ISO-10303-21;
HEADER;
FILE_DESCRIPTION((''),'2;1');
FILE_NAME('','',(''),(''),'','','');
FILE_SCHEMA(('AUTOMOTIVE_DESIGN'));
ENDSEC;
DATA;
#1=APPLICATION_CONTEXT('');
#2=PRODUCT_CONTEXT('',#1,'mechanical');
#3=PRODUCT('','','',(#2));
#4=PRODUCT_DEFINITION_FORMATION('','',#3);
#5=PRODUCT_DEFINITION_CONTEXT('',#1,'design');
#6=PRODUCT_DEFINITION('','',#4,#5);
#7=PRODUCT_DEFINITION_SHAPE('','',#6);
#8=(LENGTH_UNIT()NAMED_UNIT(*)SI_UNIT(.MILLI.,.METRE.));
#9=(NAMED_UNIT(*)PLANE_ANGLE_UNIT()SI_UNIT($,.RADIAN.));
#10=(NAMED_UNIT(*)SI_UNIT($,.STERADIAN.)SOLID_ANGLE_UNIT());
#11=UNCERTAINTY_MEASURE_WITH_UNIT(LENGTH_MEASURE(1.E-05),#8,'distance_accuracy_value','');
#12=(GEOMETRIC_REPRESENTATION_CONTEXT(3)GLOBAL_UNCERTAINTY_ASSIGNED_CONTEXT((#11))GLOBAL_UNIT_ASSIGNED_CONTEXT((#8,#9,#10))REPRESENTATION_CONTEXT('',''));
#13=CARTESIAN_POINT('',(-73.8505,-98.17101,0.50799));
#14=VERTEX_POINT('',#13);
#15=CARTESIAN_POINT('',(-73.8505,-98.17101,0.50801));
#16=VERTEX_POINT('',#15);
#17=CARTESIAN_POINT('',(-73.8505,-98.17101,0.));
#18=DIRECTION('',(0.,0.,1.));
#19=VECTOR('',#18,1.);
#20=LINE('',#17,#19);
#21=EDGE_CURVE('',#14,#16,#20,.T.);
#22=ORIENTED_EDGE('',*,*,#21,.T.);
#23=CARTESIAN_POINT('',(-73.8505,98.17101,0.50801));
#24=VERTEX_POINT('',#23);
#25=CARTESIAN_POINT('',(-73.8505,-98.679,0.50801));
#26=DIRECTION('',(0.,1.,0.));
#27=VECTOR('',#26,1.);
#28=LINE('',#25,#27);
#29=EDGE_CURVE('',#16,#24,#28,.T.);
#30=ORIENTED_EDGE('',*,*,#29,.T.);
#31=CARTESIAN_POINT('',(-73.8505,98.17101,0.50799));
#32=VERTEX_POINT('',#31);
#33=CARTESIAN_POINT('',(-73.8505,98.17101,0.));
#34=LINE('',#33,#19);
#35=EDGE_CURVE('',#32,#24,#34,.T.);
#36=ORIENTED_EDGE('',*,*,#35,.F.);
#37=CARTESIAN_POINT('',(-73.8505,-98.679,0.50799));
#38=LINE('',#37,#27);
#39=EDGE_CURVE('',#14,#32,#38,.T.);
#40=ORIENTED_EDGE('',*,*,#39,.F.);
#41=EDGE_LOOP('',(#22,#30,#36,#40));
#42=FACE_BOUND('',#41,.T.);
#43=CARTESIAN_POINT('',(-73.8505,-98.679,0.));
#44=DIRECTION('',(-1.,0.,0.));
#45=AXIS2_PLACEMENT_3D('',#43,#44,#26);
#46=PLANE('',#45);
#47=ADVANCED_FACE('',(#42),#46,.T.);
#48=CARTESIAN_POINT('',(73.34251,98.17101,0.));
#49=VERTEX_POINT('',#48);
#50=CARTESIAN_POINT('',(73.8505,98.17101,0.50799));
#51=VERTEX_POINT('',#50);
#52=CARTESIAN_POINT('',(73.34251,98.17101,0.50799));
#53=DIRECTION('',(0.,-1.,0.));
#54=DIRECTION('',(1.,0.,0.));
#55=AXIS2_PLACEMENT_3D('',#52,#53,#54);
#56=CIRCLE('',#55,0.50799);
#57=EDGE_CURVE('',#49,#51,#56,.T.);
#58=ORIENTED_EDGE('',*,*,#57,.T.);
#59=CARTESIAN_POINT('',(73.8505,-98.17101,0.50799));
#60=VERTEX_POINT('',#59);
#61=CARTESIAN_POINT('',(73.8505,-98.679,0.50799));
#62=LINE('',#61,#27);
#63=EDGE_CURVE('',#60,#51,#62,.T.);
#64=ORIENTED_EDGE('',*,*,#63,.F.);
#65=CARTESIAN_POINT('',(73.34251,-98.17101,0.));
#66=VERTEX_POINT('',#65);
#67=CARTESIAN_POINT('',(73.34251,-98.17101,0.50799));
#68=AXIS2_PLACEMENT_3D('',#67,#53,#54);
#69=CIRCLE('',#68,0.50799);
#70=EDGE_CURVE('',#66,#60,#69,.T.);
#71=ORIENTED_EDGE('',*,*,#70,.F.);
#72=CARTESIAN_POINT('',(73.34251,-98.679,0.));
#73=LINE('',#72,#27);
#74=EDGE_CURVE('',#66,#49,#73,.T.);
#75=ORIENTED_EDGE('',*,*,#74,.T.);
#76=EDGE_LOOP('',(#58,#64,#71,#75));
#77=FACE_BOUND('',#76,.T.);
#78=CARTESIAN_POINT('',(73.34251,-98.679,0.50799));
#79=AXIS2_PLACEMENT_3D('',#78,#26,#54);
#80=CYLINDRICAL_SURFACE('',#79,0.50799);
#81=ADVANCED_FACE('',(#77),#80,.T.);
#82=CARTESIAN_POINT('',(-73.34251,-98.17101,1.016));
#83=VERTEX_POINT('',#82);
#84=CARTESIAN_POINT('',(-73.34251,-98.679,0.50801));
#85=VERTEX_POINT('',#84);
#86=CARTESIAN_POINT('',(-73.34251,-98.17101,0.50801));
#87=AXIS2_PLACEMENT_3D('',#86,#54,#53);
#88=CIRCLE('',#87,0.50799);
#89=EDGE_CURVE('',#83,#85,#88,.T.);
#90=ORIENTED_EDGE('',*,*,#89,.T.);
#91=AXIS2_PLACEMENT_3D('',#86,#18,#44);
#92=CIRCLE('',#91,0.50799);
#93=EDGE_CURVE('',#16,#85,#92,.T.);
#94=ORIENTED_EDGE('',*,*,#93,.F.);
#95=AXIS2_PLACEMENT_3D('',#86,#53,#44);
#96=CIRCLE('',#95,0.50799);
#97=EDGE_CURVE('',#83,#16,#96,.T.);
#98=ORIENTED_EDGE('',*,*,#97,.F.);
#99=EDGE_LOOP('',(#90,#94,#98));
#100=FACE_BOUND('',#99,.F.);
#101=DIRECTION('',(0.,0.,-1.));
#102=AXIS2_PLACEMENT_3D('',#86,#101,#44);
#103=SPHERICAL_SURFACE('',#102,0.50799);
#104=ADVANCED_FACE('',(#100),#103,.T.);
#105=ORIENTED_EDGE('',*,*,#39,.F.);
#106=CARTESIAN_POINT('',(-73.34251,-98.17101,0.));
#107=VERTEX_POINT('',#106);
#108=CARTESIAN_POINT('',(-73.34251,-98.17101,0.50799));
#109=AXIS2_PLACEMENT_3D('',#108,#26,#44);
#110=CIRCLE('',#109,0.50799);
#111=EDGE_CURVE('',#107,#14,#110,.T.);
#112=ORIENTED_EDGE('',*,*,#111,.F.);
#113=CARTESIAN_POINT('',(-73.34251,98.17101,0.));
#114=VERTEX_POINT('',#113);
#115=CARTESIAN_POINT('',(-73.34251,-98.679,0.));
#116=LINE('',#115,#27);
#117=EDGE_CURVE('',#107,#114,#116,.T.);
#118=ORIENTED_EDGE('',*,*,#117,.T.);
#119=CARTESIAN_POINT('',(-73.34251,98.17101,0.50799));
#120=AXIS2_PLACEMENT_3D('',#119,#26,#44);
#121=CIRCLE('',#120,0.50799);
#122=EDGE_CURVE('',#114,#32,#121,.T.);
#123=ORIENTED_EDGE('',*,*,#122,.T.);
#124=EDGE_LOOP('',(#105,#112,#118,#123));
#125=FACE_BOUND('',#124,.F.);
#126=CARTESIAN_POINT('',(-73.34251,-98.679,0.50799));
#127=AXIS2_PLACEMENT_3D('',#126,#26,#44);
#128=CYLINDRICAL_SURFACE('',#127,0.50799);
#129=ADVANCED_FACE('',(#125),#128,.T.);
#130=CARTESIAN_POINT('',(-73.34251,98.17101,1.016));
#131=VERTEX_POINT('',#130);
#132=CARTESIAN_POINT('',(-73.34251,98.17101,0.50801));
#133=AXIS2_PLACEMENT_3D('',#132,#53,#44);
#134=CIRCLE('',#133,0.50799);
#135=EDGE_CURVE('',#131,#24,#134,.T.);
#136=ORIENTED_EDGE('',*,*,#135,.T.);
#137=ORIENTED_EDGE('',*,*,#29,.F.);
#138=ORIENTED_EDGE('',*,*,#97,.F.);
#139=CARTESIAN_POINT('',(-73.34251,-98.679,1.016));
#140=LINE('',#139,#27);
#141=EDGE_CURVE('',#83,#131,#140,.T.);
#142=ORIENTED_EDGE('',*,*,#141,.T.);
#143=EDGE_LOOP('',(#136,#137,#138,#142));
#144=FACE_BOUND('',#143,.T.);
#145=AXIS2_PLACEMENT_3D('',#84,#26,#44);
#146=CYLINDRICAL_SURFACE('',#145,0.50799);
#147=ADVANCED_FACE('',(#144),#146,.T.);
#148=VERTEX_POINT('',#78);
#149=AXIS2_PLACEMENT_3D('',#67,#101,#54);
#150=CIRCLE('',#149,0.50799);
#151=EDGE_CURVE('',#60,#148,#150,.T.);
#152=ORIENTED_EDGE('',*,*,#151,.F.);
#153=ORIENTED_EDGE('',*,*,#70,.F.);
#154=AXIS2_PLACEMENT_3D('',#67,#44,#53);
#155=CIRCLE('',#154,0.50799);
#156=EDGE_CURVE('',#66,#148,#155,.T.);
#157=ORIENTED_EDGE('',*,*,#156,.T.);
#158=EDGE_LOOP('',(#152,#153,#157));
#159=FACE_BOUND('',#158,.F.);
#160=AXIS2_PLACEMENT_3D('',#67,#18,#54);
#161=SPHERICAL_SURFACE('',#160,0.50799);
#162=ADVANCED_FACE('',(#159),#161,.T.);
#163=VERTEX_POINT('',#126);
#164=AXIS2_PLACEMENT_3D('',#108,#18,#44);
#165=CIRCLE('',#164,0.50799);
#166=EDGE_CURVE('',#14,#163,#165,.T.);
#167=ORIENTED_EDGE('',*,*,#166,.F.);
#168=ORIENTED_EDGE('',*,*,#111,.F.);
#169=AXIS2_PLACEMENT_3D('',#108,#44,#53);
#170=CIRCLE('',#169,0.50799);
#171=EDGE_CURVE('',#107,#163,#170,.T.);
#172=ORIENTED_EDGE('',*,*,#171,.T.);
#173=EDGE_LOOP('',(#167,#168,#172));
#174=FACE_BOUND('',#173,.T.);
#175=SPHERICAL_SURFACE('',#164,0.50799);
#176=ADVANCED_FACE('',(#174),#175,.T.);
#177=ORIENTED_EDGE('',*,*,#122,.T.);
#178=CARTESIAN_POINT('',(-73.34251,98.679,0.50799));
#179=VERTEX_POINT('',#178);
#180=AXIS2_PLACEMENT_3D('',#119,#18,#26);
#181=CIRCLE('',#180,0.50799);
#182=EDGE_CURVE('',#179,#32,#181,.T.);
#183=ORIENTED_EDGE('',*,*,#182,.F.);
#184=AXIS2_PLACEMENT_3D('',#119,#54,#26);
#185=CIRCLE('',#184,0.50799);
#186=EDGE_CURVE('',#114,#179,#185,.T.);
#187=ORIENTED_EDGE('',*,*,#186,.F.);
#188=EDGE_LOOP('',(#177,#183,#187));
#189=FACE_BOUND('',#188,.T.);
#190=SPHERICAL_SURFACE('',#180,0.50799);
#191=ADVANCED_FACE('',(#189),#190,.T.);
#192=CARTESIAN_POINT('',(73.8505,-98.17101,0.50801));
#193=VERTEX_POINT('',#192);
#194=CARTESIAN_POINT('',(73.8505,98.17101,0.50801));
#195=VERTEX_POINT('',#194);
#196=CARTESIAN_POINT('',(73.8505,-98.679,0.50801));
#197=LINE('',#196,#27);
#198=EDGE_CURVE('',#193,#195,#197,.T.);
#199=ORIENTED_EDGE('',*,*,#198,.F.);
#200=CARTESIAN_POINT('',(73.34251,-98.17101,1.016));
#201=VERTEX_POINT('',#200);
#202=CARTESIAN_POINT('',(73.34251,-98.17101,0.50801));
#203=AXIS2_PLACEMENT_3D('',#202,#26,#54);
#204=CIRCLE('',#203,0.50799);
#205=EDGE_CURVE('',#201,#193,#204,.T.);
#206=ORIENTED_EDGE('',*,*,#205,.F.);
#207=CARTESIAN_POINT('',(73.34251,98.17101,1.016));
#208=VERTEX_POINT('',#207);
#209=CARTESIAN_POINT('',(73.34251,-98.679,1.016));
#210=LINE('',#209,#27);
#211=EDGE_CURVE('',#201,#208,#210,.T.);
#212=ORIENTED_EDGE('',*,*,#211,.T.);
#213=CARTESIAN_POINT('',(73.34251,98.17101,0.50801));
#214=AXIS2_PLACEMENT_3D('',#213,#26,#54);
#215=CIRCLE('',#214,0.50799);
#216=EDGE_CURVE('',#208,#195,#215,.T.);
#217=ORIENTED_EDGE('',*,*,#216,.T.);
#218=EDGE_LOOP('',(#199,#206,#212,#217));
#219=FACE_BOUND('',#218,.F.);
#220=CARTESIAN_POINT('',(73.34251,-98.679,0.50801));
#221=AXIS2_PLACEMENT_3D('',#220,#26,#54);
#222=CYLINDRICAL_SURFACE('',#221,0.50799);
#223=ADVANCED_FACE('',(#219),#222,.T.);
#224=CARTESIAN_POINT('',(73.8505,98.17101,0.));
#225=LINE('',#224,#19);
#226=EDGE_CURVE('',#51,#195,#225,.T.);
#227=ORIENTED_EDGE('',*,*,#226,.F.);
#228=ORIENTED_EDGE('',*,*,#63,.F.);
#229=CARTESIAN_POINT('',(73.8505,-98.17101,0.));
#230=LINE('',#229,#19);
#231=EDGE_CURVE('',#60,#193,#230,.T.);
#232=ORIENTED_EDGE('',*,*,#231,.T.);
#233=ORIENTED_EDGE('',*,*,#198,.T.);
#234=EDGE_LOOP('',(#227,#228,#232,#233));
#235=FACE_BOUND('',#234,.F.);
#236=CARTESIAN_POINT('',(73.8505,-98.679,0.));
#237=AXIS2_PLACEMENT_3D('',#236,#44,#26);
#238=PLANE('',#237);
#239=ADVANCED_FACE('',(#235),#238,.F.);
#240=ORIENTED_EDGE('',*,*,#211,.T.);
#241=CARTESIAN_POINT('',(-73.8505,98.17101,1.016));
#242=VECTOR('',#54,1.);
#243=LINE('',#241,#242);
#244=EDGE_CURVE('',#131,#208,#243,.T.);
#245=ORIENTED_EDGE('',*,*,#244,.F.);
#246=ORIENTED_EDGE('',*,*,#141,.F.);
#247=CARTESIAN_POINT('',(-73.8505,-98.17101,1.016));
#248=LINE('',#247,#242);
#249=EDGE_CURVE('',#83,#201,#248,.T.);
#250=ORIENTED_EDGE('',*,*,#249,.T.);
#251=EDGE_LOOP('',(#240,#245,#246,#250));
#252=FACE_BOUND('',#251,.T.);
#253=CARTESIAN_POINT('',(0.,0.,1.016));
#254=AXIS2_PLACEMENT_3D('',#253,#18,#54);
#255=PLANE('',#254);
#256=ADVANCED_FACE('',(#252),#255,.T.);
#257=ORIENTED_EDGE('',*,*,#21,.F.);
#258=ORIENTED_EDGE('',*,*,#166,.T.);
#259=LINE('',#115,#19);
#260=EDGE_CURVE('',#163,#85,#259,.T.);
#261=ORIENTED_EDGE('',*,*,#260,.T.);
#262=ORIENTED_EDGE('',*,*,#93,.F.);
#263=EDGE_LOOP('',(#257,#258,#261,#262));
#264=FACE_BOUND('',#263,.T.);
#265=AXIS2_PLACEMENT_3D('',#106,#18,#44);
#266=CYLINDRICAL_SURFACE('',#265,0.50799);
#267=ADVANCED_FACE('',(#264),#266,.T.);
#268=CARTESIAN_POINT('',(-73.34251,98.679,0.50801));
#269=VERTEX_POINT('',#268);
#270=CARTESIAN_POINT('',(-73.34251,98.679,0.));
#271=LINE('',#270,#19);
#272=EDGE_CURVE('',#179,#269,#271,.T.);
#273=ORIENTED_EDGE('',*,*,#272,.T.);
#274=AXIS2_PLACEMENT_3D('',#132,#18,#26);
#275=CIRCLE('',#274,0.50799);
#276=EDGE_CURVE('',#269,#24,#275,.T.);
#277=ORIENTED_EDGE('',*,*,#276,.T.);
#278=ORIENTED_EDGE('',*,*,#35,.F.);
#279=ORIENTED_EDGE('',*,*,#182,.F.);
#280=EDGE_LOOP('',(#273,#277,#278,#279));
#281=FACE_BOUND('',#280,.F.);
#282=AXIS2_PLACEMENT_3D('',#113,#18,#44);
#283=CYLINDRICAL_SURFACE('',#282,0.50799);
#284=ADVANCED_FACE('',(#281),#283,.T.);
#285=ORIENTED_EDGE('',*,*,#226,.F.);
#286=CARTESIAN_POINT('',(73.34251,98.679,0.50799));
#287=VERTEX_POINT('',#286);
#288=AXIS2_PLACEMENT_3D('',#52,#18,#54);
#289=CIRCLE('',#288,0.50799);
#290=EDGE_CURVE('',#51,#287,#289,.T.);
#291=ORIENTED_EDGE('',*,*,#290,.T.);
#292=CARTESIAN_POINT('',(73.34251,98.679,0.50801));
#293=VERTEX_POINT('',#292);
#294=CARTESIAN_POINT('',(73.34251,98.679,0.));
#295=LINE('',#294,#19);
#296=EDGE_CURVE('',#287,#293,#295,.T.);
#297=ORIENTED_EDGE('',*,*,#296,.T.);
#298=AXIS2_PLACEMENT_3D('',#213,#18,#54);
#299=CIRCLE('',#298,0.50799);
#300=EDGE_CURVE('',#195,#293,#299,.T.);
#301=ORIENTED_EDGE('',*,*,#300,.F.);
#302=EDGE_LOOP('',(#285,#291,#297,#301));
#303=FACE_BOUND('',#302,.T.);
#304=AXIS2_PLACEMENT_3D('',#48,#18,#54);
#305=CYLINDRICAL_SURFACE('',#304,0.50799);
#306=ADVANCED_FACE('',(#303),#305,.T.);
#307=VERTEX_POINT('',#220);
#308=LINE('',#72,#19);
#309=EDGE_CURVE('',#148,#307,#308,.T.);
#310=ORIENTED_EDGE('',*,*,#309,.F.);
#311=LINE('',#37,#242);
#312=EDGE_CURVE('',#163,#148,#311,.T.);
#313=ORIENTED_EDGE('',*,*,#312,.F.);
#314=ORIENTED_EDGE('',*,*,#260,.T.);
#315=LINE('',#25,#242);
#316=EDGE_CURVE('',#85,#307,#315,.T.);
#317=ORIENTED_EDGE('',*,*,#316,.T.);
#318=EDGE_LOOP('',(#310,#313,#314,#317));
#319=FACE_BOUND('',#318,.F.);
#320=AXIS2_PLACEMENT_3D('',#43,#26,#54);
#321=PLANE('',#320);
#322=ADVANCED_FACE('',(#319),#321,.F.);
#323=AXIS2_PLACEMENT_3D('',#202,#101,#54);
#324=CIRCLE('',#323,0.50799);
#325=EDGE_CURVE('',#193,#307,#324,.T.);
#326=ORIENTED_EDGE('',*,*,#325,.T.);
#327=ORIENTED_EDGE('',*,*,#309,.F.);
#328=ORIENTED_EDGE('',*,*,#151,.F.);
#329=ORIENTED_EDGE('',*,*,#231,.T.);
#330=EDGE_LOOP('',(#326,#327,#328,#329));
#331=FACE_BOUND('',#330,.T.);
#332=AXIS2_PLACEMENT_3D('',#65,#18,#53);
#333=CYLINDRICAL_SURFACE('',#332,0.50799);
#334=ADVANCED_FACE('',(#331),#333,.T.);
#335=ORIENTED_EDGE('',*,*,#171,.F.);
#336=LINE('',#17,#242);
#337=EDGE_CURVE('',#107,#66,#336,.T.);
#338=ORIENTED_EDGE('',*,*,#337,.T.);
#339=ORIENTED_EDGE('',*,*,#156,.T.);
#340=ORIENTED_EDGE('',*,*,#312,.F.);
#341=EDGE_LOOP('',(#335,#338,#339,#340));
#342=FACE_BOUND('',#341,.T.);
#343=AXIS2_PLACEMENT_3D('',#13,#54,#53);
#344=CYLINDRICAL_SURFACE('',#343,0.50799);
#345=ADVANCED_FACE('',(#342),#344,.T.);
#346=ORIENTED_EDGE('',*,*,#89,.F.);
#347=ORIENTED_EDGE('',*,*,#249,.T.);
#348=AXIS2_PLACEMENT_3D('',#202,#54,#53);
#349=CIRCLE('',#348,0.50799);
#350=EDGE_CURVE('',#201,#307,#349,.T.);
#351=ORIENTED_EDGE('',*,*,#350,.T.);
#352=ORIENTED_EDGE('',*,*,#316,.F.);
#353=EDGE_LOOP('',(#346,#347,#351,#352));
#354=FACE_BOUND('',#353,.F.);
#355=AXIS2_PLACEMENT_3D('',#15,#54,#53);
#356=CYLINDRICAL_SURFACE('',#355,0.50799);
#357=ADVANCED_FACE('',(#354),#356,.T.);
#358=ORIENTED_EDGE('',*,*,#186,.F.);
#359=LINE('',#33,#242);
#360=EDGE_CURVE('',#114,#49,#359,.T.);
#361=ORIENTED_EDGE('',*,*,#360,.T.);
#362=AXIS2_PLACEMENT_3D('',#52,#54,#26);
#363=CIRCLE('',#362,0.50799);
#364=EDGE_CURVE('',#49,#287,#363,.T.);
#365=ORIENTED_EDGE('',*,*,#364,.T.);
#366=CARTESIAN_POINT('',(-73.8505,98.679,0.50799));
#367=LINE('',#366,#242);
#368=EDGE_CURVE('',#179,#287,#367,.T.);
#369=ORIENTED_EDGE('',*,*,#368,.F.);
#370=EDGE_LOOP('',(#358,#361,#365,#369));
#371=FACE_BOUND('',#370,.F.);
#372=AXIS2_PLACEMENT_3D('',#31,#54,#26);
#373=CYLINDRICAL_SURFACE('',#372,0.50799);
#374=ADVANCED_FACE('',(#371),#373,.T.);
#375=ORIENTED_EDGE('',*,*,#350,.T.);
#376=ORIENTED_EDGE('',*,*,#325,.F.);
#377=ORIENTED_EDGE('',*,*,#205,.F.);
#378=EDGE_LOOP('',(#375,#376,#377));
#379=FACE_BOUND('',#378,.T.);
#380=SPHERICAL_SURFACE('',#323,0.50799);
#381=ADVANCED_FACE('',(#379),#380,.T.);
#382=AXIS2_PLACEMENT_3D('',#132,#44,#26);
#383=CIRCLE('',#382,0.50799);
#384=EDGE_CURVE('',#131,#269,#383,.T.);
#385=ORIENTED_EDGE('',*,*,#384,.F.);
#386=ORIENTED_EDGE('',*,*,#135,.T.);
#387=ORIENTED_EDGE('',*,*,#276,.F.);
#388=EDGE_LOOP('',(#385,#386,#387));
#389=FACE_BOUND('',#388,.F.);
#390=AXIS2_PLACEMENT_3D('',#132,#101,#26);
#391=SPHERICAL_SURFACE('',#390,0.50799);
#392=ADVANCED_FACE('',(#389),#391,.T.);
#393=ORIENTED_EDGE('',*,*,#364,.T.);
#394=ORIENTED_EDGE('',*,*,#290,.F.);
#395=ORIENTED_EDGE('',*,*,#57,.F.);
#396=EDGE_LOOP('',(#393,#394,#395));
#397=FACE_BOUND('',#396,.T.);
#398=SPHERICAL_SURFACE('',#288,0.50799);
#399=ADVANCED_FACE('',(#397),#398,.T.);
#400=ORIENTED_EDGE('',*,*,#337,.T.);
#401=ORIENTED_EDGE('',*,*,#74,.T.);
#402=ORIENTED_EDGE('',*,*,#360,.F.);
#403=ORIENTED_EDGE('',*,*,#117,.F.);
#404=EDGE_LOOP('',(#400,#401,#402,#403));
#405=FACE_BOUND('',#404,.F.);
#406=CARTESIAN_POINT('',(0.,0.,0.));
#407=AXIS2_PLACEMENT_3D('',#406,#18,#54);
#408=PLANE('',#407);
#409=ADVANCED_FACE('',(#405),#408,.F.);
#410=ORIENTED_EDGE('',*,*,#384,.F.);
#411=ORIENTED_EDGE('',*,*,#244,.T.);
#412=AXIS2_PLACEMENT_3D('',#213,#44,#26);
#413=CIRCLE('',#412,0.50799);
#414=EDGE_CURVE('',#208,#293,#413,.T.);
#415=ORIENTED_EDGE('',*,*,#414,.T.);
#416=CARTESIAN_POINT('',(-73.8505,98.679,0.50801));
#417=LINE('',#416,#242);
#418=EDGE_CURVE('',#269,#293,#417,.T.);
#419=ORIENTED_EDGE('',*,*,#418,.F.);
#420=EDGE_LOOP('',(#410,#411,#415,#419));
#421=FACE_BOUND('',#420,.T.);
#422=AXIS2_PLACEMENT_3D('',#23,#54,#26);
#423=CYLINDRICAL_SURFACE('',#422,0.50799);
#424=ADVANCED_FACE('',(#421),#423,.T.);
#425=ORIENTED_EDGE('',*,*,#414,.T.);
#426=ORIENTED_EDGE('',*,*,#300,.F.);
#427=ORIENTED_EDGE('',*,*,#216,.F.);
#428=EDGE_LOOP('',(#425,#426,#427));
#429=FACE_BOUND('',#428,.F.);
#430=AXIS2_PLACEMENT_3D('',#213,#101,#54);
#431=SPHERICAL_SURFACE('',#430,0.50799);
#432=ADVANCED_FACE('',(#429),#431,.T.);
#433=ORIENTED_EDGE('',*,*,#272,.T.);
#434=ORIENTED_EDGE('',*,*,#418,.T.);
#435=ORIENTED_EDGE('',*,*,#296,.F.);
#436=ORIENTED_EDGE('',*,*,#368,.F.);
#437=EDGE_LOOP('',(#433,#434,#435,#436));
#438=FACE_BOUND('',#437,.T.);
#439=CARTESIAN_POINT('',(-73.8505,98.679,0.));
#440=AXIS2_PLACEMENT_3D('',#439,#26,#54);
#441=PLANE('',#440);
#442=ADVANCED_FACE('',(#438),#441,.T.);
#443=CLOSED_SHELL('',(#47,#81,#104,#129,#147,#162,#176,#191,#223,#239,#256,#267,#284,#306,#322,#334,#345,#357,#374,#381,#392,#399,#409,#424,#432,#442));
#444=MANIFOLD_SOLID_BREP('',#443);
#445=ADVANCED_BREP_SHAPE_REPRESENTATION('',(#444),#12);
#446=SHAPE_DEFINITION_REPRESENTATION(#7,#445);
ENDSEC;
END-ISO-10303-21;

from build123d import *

# Parameters (mm, degrees)
F0_W     = 147.701
F0_H     = 197.358
F1_DEPTH = 1.016
F2_R     = 0.50799


# Not quite as in the source:
# - a fillet or chamfer is up to 0.001 mm smaller than in the source, because OpenCascade refuses the exact size


with BuildPart() as f1:
    # F0 (on Top) → F1 (new body)
    with BuildSketch(Plane.XY):
        Rectangle(F0_W, F0_H)
    extrude(amount=F1_DEPTH)

    # F2 (radius 0.508 in the source; OpenCascade refuses exactly that, so slightly less here)
    f2_edges = [f1.edges().sort_by_distance(p)[0] for p in [
        (73.8505, -98.679, 0.508),
        (73.8505, 98.679, 0.508),
        (73.8505, 0, 0),
        (73.8505, 0, 1.016),
        (-73.8505, 98.679, 0.508),
        (0, 98.679, 0),
        (0, 98.679, 1.016),
        (-73.8505, -98.679, 0.508),
        (-73.8505, 0, 0),
        (-73.8505, 0, 1.016),
        (0, -98.679, 0),
        (0, -98.679, 1.016),
    ]]
    fillet(f2_edges, radius=F2_R)


solid = f1.part
